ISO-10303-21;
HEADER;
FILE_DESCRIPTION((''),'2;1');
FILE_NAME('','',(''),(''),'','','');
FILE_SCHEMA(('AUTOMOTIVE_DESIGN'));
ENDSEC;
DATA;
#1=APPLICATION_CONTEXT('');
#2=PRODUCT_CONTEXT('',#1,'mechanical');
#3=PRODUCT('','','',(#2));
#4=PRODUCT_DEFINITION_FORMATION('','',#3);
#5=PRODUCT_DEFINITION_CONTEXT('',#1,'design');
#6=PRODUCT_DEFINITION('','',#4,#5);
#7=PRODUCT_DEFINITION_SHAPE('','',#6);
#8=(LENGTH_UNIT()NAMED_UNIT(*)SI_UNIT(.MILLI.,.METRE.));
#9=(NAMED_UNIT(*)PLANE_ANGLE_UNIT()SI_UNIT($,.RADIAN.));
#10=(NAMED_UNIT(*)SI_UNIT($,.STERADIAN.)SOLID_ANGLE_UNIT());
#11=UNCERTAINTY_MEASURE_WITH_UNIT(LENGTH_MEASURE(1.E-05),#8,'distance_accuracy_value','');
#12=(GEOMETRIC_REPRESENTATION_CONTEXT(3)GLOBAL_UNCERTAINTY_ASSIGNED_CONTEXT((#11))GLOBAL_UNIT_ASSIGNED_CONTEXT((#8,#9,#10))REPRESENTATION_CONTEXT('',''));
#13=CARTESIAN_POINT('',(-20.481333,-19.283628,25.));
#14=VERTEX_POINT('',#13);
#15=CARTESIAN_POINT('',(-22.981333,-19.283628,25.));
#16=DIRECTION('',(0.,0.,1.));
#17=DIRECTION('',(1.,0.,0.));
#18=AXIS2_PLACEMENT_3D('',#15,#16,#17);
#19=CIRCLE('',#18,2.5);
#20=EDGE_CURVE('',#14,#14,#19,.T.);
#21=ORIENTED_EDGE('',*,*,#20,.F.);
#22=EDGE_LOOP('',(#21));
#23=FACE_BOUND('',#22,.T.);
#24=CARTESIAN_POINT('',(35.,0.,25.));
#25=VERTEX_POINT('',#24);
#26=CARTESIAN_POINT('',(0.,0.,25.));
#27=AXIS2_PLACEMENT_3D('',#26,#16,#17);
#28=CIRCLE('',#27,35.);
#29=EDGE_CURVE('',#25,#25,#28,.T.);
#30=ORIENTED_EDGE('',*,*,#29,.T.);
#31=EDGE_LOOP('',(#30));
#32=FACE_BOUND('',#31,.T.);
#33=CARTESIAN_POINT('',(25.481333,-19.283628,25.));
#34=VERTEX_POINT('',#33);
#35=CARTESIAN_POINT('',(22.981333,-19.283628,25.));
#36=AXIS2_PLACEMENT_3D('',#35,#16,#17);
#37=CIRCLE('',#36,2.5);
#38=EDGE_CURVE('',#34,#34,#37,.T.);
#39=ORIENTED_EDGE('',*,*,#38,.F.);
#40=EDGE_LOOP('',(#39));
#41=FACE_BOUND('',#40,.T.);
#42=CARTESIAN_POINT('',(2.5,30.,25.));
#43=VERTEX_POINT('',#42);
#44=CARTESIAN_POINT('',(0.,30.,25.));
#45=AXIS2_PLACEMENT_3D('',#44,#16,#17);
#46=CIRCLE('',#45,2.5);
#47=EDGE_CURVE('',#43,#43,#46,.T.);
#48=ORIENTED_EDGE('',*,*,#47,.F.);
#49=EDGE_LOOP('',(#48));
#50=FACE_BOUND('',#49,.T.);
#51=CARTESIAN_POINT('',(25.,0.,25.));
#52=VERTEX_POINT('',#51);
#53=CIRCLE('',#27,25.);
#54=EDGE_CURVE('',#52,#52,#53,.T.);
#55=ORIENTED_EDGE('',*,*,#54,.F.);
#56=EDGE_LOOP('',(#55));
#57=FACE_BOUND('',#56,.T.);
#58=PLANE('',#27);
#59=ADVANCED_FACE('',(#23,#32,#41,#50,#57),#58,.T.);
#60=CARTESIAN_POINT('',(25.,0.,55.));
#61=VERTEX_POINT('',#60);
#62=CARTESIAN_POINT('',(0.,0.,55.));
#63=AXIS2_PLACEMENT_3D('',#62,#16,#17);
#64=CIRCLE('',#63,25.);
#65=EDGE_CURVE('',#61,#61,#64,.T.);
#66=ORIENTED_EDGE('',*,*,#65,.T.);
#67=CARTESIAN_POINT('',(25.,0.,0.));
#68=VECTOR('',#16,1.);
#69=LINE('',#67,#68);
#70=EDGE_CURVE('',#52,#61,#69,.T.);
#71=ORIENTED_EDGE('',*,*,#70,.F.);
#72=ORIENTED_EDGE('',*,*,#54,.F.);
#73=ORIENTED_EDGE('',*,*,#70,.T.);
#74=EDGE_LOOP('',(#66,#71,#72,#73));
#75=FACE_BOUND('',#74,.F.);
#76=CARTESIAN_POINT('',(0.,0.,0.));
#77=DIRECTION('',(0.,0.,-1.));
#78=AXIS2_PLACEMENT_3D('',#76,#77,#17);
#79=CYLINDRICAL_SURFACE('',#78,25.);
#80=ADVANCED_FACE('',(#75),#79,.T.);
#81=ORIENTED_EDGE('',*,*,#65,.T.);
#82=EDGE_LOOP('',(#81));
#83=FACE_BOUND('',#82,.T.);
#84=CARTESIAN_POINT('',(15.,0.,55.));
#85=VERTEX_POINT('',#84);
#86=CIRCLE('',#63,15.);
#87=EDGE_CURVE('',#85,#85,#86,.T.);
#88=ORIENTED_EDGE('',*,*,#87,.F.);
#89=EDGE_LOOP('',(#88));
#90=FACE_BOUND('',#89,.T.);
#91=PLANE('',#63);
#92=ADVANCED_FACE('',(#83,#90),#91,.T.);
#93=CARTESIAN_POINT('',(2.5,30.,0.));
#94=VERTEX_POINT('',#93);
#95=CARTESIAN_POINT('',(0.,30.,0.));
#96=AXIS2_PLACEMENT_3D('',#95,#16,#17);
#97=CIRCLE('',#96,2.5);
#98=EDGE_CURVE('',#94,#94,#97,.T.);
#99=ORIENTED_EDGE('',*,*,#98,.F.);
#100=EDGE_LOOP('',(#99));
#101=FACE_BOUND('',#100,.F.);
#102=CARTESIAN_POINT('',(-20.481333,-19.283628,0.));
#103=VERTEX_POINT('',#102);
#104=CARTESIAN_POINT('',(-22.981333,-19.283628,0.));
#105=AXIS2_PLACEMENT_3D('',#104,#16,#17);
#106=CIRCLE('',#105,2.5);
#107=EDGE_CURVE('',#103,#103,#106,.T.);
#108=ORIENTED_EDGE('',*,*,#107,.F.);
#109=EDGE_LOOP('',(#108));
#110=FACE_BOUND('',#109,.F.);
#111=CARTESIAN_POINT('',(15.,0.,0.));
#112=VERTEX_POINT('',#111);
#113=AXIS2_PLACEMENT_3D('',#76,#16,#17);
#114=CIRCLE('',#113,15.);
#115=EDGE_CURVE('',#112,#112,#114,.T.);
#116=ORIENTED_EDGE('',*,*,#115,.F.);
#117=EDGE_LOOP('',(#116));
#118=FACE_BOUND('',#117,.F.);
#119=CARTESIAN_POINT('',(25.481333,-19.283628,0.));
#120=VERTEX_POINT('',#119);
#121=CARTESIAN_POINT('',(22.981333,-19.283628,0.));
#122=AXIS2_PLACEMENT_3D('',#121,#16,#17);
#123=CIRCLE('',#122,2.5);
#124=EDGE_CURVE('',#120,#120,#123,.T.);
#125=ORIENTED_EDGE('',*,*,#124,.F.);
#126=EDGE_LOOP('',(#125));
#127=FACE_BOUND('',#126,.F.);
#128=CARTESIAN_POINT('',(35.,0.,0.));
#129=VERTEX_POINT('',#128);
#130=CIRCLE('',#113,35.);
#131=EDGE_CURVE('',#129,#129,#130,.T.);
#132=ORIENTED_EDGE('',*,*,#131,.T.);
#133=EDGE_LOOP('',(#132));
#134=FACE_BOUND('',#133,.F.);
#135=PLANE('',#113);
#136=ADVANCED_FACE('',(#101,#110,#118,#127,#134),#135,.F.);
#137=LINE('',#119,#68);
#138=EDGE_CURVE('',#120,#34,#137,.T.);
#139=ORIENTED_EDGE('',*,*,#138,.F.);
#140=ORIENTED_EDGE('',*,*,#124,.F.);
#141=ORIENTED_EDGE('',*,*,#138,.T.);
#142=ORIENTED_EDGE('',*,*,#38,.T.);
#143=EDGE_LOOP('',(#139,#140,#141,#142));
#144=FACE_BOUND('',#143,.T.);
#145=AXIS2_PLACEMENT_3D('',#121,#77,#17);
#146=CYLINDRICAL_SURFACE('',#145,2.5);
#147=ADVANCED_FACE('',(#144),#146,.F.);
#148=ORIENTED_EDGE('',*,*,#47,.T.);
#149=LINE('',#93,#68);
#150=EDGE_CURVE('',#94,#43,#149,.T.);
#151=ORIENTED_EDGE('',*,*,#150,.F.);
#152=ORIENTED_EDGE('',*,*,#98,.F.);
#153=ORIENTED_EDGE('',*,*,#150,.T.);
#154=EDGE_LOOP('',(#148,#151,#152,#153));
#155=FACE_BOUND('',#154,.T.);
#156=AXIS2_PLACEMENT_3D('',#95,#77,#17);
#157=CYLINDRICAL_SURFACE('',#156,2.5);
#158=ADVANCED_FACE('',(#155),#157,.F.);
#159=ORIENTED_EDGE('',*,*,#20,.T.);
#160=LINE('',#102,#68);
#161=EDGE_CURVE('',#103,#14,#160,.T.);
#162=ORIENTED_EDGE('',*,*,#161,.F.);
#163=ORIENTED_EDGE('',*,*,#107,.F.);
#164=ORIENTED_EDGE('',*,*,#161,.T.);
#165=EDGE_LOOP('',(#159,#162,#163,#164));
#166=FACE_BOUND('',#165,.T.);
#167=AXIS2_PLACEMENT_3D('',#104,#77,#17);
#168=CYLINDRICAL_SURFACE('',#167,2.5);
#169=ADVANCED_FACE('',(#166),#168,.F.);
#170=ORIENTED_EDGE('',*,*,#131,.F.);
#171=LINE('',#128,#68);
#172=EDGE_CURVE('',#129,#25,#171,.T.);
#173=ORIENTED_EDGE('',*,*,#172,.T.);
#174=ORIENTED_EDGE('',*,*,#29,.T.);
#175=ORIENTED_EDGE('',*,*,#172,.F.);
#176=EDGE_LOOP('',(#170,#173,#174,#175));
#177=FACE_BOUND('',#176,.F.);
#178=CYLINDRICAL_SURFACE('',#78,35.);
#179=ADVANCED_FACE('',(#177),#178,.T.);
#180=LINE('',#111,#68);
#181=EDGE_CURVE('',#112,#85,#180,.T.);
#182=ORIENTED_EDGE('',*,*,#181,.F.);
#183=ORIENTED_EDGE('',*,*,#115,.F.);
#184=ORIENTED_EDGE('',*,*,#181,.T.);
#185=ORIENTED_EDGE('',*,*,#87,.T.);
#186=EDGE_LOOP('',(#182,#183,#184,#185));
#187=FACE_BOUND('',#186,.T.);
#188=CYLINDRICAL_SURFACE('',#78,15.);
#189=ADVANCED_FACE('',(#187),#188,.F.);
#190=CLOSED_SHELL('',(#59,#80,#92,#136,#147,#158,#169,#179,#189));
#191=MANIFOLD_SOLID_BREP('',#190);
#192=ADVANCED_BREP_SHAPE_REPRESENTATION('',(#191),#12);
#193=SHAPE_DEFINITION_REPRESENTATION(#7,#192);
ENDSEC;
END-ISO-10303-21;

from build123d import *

# Parameters (mm, degrees)
F0_R     = 35
F0_R_2   = 2.5
F0_R_3   = 25
F1_DEPTH = 25
F0_R_4   = 15
F2_DEPTH = 55


# Not quite as in the source:
# - the program builds the solid bodies; features that only make, move or delete a surface that nothing else refers to are left out


with BuildPart() as f1:
    # F0 (on Top) → F1 (new body)
    with BuildSketch(Plane.XY):
        Circle(F0_R)
        with Locations((-22.9813332936, -19.2836282906)):
            Circle(F0_R_2, mode=Mode.SUBTRACT)
        with Locations((22.9813332936, -19.2836282906)):
            Circle(F0_R_2, mode=Mode.SUBTRACT)
        Circle(F0_R_3, mode=Mode.SUBTRACT)
        with Locations((0, 30)):
            Circle(F0_R_2, mode=Mode.SUBTRACT)
    extrude(amount=F1_DEPTH)

    # F0 (on Top) → F2 (join)
    with BuildSketch(Plane.XY):
        Circle(F0_R_3)
        Circle(F0_R_4, mode=Mode.SUBTRACT)
    extrude(amount=F2_DEPTH)


solid = f1.part
